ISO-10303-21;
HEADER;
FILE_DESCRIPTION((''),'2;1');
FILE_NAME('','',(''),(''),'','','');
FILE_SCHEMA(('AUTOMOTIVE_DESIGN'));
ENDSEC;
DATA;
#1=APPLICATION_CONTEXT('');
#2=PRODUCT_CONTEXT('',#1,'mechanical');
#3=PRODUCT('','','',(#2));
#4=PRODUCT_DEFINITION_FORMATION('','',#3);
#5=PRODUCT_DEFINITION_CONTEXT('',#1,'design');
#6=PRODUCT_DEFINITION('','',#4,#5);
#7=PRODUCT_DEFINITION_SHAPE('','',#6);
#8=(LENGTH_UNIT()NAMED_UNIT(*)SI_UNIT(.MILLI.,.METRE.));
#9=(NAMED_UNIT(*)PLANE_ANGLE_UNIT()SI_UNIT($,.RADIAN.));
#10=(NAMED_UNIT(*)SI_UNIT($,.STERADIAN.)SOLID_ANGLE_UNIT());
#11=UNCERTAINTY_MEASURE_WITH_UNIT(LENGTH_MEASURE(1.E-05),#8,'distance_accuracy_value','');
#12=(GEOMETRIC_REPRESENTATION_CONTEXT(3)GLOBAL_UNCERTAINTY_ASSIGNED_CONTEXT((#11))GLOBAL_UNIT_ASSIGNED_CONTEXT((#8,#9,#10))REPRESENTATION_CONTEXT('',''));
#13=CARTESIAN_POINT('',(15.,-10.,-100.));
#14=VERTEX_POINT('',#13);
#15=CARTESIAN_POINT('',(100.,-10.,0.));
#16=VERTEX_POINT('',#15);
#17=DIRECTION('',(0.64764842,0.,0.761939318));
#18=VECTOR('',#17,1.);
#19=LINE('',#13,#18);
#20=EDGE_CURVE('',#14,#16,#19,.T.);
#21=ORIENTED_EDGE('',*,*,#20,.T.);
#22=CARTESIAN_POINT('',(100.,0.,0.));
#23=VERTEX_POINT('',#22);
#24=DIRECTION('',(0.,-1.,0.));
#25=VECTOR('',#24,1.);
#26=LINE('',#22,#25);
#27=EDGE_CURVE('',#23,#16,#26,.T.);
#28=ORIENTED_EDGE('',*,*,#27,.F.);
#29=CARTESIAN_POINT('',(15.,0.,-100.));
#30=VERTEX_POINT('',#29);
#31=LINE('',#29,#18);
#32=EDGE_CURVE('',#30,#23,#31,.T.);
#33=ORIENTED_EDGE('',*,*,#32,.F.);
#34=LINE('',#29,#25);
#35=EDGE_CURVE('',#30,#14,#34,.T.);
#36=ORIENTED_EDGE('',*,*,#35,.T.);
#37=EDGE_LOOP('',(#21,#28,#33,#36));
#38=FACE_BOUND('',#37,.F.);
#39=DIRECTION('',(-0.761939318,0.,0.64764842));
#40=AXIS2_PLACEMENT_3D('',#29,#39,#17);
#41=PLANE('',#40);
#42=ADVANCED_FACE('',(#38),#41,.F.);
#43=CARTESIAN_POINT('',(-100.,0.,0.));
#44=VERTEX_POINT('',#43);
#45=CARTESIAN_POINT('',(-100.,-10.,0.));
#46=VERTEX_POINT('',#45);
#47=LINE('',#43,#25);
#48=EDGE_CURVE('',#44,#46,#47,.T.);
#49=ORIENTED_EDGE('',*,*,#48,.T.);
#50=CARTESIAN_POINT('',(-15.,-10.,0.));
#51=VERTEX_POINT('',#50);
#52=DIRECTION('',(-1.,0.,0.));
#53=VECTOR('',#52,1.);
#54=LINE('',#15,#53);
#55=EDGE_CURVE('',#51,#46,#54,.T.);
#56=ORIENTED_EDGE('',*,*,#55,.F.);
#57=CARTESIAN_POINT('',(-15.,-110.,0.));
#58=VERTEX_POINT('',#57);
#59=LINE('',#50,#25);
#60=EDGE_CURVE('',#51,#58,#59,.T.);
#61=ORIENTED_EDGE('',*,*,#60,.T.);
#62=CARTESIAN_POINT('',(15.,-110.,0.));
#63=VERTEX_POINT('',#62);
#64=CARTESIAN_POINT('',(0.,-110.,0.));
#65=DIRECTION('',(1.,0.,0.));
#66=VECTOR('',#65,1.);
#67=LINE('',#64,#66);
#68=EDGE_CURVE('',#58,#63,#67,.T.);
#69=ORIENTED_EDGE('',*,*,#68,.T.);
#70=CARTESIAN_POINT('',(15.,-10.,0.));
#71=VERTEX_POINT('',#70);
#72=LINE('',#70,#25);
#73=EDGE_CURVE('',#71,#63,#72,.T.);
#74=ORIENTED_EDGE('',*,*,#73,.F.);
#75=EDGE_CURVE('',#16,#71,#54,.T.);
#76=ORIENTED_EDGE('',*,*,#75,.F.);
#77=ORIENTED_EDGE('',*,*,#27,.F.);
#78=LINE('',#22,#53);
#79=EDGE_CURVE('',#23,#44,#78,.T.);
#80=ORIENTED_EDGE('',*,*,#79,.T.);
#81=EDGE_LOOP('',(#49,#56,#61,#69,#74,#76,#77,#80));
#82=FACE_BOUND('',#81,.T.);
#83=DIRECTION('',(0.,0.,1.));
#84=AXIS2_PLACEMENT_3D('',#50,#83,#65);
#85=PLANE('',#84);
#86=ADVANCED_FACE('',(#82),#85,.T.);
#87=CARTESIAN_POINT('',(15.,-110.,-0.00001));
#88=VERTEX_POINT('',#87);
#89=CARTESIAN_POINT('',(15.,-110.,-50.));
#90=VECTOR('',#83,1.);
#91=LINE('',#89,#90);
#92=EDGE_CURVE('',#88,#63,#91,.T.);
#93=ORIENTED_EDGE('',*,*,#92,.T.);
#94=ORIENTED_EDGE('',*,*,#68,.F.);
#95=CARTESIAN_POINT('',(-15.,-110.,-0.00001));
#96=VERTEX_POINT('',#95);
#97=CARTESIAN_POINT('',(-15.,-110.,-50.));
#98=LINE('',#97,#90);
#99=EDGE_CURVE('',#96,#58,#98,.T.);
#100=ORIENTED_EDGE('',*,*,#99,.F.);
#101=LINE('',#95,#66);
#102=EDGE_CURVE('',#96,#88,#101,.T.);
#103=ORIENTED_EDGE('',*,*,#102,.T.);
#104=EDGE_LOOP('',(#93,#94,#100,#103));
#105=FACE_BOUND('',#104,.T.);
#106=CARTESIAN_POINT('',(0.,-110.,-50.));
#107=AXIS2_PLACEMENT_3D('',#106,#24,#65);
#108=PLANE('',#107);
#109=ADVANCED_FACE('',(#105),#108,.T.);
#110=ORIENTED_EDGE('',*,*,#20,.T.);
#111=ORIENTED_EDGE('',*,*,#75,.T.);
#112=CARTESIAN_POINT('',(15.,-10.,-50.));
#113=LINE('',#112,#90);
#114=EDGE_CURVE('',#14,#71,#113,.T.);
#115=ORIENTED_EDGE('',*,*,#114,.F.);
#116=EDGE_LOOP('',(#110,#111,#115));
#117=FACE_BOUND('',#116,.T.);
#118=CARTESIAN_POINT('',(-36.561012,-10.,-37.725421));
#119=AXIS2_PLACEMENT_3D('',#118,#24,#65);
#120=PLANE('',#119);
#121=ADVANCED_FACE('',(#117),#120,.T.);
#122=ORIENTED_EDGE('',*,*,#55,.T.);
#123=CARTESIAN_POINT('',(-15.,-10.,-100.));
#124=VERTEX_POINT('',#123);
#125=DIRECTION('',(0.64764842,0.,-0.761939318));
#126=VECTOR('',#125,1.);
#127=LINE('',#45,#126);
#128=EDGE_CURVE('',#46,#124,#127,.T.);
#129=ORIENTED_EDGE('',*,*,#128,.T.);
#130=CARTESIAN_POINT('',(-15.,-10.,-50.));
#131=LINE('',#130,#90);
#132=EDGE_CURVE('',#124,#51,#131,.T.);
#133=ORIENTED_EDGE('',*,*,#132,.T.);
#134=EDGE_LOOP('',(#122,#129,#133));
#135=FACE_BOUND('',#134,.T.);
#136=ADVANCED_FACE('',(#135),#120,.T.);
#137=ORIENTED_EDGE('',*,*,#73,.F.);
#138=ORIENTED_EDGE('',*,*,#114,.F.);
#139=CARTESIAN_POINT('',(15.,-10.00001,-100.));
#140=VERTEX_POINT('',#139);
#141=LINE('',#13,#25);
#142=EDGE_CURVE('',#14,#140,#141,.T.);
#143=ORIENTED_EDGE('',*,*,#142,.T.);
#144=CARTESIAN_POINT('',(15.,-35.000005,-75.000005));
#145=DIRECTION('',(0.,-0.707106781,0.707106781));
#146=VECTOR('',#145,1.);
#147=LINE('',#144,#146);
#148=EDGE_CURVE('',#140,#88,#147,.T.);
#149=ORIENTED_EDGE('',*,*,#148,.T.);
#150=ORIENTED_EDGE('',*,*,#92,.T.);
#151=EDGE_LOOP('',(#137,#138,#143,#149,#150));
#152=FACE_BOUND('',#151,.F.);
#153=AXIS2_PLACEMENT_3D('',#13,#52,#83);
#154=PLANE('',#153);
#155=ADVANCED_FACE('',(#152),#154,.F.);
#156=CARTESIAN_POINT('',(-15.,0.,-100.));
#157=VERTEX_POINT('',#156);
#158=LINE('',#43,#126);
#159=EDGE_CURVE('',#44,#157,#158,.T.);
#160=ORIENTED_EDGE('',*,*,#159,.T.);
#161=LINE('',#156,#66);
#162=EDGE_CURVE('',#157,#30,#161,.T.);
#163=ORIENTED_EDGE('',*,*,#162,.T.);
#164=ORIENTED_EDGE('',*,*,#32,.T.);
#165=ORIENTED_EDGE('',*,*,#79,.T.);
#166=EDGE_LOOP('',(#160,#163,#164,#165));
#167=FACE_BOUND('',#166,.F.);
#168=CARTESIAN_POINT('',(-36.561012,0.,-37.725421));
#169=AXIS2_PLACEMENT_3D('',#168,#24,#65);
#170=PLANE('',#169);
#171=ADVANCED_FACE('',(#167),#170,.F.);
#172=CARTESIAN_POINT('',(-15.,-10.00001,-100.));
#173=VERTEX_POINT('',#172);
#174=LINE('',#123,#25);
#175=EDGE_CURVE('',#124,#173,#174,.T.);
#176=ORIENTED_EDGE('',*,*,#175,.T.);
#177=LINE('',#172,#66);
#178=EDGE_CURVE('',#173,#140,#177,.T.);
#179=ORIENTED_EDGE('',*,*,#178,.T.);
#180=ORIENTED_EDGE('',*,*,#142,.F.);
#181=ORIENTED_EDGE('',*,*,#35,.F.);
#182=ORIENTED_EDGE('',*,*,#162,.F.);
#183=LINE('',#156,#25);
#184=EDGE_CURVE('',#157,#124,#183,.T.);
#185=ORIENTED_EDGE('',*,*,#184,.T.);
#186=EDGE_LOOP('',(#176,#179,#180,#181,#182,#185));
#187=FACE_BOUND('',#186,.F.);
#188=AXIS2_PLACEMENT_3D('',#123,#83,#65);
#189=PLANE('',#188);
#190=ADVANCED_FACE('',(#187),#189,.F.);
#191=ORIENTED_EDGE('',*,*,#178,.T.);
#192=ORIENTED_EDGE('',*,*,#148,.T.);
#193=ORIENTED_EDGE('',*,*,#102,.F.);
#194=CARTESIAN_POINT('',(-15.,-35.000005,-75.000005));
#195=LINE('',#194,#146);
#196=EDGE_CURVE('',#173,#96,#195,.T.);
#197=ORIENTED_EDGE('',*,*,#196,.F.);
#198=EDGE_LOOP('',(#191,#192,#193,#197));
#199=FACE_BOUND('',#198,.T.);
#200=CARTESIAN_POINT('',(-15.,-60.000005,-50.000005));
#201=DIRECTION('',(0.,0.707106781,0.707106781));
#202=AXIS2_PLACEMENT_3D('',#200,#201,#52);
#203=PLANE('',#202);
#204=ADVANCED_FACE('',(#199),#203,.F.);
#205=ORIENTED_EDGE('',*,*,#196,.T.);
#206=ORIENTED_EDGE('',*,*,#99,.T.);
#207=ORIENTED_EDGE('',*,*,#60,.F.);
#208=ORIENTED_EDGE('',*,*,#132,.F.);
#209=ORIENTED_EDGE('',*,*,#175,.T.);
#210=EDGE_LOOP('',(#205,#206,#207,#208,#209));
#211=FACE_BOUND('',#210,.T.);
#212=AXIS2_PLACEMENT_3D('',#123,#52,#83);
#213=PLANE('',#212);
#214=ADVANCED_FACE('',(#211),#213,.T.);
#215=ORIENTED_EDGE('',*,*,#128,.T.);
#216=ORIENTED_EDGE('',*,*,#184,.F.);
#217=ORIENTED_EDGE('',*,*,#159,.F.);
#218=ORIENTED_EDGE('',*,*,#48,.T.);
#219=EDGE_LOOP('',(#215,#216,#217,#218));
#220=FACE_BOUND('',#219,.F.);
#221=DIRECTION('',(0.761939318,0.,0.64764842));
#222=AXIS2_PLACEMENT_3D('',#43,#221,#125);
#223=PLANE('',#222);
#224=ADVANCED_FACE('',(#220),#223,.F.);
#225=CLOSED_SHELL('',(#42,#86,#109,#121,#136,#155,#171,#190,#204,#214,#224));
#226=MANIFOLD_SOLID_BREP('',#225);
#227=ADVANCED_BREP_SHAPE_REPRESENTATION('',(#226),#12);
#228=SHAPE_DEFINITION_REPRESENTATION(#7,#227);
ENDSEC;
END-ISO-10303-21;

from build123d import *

# Parameters (mm, degrees)
F1_DEPTH = 10
F2_W     = 30
F2_H     = 100
F3_DEPTH = 100
F4_SIZE  = 99.99999


# Not quite as in the source:
# - a fillet or chamfer is up to 0.001 mm smaller than in the source, because OpenCascade refuses the exact size


with BuildPart() as f1:
    # F0 (on Front) → F1 (new body)
    with BuildSketch(Plane.XZ):
        Polygon((0, -100), (0, 0), (-100, 0), (-15, -100), align=None)
        Polygon((100, 0), (0, 0), (0, -100), (15, -100), align=None)
    extrude(amount=F1_DEPTH)

    # F2 (on face) → F3 (join)
    with BuildSketch(Plane.XZ.offset(10)):
        with Locations((0, -50)):
            Rectangle(F2_W, F2_H)
    extrude(amount=F3_DEPTH)

    # F4 (size 100 in the source; OpenCascade refuses exactly that, so slightly less here)
    f4_edges = [f1.edges().sort_by_distance(p)[0] for p in [
        (0, -110, -100),
    ]]
    chamfer(f4_edges, length=F4_SIZE)


solid = f1.part
